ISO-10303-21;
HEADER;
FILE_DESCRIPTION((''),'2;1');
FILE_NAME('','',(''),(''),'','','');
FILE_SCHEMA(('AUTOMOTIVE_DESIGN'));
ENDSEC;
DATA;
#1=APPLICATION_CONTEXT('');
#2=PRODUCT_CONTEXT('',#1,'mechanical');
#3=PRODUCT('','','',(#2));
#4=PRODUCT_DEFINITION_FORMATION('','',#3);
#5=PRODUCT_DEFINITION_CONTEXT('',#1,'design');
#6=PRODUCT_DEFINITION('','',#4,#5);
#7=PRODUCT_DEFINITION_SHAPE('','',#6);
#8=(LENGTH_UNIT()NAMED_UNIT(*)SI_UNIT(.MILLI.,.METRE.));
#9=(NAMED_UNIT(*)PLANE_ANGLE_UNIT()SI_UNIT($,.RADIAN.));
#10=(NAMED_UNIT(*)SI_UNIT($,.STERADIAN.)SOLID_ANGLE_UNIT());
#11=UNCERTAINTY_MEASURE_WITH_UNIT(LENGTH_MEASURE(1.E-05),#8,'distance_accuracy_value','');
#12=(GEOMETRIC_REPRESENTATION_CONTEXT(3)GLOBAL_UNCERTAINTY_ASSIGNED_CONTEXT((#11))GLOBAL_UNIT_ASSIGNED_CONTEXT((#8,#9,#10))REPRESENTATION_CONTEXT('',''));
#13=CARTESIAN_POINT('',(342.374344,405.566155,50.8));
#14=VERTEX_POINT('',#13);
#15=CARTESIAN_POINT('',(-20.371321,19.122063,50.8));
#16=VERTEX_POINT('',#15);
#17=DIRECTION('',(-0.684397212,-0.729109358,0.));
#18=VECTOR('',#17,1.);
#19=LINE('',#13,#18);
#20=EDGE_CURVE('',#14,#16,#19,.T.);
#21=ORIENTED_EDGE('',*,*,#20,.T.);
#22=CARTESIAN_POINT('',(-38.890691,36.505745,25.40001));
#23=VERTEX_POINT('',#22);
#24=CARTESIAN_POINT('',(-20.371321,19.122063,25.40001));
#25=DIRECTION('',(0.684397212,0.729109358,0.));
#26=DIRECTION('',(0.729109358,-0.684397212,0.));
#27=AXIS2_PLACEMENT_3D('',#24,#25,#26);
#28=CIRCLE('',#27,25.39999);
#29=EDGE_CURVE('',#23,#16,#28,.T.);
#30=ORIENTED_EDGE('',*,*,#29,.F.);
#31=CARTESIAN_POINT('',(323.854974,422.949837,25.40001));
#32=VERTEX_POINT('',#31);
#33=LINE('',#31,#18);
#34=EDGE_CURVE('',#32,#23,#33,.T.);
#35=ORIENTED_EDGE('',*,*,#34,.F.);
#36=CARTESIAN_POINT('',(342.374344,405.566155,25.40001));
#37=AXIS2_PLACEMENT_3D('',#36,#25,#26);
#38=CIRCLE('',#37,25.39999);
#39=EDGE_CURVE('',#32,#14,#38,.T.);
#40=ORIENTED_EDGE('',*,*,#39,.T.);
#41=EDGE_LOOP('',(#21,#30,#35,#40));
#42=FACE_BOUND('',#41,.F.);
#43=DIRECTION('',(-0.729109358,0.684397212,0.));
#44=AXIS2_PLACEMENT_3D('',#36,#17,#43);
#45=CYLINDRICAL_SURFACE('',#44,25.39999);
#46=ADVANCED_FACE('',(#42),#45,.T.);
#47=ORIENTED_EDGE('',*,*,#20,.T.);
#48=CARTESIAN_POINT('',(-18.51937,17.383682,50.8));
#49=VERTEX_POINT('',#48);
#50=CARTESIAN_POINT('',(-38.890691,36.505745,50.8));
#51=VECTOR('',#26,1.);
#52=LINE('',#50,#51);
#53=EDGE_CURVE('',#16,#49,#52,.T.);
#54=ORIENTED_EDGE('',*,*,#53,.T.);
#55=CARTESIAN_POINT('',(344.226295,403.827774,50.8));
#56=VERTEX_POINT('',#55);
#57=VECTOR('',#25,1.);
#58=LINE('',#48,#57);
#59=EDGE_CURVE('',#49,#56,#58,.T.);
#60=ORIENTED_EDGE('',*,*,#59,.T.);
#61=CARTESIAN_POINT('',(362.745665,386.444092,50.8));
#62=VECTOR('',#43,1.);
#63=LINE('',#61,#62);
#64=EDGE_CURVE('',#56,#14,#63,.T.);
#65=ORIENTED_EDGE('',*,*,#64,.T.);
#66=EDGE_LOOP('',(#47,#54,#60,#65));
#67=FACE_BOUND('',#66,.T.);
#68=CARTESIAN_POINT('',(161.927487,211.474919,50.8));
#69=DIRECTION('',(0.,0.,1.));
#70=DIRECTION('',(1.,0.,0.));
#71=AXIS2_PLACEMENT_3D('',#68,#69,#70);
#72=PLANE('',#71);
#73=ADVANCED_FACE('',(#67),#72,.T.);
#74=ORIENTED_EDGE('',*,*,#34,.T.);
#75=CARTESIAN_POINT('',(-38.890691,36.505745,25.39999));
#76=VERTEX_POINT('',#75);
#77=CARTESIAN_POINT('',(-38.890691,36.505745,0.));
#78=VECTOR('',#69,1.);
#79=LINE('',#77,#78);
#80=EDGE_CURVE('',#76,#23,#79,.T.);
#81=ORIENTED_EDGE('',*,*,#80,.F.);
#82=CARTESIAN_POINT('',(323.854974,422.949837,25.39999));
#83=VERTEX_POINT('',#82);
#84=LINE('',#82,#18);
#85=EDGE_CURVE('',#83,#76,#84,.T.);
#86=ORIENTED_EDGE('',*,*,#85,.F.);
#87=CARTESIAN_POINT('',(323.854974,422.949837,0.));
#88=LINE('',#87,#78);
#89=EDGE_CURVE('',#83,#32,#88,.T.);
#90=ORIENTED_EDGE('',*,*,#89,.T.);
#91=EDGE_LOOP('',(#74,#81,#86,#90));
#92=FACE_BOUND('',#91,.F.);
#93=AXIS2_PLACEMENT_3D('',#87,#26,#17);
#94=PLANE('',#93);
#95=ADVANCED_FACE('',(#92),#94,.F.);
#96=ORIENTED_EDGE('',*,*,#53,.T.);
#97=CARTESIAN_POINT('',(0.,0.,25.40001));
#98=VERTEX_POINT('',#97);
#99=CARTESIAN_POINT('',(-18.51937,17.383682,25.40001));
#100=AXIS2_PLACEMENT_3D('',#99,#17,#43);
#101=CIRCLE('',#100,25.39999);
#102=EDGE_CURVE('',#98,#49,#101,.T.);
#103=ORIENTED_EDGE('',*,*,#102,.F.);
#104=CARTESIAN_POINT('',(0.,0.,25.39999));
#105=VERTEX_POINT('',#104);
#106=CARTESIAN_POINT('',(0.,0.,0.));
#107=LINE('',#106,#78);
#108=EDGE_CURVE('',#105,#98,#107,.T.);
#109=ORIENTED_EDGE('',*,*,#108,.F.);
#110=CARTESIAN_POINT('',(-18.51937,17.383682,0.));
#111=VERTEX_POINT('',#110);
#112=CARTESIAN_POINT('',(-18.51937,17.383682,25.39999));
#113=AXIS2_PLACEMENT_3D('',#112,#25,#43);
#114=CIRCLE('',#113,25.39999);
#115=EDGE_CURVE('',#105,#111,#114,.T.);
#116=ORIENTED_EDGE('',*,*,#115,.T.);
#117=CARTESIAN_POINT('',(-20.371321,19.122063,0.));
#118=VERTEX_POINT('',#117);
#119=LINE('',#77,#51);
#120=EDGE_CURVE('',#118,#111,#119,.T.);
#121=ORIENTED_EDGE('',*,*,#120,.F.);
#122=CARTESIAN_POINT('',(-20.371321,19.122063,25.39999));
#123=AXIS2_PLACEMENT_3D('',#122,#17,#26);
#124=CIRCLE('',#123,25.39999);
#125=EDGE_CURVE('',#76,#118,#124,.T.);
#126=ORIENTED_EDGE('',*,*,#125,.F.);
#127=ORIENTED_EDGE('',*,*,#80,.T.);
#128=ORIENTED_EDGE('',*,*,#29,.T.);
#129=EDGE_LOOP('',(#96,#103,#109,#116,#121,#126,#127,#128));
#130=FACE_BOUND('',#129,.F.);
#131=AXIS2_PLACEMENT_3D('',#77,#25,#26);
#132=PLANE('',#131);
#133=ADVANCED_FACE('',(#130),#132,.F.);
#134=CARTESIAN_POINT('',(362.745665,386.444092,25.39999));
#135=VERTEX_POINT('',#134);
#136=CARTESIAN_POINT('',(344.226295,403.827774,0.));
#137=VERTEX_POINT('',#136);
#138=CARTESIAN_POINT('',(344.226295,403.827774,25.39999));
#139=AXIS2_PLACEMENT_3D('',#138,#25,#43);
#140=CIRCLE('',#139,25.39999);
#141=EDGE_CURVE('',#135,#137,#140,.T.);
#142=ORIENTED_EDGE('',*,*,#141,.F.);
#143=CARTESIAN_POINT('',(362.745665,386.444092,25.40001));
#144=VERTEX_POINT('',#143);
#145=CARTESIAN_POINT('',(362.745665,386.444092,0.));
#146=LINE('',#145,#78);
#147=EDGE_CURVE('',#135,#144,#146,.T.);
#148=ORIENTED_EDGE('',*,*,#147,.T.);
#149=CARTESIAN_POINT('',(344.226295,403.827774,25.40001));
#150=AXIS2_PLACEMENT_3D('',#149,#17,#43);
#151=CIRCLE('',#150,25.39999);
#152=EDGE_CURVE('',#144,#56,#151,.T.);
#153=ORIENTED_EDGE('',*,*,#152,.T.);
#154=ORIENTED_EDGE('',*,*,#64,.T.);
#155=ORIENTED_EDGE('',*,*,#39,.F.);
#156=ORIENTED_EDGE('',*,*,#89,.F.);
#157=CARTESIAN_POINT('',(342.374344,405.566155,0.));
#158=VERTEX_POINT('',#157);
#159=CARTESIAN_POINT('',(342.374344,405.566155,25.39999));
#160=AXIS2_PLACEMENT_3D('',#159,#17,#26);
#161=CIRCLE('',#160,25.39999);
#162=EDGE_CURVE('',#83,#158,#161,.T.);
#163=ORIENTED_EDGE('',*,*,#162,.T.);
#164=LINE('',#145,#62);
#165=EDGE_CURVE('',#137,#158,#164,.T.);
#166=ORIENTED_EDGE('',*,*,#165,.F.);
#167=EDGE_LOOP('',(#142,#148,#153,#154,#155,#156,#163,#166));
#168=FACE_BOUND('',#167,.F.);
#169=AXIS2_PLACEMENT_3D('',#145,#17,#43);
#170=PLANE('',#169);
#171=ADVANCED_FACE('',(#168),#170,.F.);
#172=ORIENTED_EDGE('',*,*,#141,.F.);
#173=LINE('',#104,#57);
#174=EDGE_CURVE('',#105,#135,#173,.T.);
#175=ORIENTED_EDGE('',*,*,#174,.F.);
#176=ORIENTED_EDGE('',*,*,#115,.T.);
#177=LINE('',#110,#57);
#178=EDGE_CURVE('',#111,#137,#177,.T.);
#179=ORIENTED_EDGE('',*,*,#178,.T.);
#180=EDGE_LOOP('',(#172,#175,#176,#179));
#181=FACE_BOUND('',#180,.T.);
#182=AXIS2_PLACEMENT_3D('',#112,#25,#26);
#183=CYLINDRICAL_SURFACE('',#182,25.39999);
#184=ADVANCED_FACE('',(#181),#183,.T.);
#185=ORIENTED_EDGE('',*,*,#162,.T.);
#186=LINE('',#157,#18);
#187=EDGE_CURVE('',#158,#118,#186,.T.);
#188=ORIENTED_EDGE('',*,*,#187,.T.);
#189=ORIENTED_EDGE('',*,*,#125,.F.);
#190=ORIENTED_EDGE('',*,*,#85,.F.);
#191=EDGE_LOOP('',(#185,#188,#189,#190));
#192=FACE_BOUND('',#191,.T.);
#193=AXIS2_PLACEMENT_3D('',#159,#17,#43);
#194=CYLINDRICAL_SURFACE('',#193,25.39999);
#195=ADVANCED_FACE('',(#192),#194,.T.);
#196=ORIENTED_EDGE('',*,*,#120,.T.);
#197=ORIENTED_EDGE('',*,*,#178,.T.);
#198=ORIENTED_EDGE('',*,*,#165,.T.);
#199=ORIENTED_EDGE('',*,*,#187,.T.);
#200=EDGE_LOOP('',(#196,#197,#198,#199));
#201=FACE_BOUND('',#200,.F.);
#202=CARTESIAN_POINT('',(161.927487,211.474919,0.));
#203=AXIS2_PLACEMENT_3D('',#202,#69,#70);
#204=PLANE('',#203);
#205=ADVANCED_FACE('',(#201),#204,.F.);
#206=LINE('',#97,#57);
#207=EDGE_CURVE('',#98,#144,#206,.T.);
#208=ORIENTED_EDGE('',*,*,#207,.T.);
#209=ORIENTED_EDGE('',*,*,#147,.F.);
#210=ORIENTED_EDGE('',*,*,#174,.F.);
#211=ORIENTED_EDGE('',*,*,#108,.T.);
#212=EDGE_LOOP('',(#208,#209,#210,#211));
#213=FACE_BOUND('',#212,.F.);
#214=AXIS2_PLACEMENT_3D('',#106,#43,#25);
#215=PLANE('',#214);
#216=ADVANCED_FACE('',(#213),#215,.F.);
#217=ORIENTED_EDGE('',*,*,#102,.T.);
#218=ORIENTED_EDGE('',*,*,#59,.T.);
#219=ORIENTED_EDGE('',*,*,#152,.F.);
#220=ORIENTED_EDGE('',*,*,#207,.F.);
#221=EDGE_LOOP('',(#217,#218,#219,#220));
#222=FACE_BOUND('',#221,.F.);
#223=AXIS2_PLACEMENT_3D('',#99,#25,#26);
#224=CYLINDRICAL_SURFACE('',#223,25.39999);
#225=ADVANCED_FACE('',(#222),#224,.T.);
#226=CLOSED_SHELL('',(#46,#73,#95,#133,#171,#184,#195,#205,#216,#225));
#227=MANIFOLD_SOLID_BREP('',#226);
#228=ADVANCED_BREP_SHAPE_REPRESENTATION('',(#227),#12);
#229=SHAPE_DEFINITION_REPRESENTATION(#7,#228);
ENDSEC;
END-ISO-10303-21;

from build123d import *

# Parameters (mm, degrees)
F1_DEPTH = 50.8
F2_R     = 25.39999


# Not quite as in the source:
# - a fillet or chamfer is up to 0.001 mm smaller than in the source, because OpenCascade refuses the exact size


with BuildPart() as f1:
    # F0 (on Top) → F1 (new body)
    with BuildSketch(Plane.XY):
        Polygon((-38.8906911175, 36.5057453632), (0, 0), (362.7456650138, 386.4440917969), (323.8549738963, 422.9498371601), align=None)
    extrude(amount=F1_DEPTH)

    # F2 (radius 25.4 in the source; OpenCascade refuses exactly that, so slightly less here)
    f2_edges = [f1.edges().sort_by_distance(p)[0] for p in [
        (142.482141, 229.727791, 50.8),
        (181.372833, 193.222046, 50.8),
        (181.372833, 193.222046, 0),
        (142.482141, 229.727791, 0),
    ]]
    fillet(f2_edges, radius=F2_R)


solid = f1.part
